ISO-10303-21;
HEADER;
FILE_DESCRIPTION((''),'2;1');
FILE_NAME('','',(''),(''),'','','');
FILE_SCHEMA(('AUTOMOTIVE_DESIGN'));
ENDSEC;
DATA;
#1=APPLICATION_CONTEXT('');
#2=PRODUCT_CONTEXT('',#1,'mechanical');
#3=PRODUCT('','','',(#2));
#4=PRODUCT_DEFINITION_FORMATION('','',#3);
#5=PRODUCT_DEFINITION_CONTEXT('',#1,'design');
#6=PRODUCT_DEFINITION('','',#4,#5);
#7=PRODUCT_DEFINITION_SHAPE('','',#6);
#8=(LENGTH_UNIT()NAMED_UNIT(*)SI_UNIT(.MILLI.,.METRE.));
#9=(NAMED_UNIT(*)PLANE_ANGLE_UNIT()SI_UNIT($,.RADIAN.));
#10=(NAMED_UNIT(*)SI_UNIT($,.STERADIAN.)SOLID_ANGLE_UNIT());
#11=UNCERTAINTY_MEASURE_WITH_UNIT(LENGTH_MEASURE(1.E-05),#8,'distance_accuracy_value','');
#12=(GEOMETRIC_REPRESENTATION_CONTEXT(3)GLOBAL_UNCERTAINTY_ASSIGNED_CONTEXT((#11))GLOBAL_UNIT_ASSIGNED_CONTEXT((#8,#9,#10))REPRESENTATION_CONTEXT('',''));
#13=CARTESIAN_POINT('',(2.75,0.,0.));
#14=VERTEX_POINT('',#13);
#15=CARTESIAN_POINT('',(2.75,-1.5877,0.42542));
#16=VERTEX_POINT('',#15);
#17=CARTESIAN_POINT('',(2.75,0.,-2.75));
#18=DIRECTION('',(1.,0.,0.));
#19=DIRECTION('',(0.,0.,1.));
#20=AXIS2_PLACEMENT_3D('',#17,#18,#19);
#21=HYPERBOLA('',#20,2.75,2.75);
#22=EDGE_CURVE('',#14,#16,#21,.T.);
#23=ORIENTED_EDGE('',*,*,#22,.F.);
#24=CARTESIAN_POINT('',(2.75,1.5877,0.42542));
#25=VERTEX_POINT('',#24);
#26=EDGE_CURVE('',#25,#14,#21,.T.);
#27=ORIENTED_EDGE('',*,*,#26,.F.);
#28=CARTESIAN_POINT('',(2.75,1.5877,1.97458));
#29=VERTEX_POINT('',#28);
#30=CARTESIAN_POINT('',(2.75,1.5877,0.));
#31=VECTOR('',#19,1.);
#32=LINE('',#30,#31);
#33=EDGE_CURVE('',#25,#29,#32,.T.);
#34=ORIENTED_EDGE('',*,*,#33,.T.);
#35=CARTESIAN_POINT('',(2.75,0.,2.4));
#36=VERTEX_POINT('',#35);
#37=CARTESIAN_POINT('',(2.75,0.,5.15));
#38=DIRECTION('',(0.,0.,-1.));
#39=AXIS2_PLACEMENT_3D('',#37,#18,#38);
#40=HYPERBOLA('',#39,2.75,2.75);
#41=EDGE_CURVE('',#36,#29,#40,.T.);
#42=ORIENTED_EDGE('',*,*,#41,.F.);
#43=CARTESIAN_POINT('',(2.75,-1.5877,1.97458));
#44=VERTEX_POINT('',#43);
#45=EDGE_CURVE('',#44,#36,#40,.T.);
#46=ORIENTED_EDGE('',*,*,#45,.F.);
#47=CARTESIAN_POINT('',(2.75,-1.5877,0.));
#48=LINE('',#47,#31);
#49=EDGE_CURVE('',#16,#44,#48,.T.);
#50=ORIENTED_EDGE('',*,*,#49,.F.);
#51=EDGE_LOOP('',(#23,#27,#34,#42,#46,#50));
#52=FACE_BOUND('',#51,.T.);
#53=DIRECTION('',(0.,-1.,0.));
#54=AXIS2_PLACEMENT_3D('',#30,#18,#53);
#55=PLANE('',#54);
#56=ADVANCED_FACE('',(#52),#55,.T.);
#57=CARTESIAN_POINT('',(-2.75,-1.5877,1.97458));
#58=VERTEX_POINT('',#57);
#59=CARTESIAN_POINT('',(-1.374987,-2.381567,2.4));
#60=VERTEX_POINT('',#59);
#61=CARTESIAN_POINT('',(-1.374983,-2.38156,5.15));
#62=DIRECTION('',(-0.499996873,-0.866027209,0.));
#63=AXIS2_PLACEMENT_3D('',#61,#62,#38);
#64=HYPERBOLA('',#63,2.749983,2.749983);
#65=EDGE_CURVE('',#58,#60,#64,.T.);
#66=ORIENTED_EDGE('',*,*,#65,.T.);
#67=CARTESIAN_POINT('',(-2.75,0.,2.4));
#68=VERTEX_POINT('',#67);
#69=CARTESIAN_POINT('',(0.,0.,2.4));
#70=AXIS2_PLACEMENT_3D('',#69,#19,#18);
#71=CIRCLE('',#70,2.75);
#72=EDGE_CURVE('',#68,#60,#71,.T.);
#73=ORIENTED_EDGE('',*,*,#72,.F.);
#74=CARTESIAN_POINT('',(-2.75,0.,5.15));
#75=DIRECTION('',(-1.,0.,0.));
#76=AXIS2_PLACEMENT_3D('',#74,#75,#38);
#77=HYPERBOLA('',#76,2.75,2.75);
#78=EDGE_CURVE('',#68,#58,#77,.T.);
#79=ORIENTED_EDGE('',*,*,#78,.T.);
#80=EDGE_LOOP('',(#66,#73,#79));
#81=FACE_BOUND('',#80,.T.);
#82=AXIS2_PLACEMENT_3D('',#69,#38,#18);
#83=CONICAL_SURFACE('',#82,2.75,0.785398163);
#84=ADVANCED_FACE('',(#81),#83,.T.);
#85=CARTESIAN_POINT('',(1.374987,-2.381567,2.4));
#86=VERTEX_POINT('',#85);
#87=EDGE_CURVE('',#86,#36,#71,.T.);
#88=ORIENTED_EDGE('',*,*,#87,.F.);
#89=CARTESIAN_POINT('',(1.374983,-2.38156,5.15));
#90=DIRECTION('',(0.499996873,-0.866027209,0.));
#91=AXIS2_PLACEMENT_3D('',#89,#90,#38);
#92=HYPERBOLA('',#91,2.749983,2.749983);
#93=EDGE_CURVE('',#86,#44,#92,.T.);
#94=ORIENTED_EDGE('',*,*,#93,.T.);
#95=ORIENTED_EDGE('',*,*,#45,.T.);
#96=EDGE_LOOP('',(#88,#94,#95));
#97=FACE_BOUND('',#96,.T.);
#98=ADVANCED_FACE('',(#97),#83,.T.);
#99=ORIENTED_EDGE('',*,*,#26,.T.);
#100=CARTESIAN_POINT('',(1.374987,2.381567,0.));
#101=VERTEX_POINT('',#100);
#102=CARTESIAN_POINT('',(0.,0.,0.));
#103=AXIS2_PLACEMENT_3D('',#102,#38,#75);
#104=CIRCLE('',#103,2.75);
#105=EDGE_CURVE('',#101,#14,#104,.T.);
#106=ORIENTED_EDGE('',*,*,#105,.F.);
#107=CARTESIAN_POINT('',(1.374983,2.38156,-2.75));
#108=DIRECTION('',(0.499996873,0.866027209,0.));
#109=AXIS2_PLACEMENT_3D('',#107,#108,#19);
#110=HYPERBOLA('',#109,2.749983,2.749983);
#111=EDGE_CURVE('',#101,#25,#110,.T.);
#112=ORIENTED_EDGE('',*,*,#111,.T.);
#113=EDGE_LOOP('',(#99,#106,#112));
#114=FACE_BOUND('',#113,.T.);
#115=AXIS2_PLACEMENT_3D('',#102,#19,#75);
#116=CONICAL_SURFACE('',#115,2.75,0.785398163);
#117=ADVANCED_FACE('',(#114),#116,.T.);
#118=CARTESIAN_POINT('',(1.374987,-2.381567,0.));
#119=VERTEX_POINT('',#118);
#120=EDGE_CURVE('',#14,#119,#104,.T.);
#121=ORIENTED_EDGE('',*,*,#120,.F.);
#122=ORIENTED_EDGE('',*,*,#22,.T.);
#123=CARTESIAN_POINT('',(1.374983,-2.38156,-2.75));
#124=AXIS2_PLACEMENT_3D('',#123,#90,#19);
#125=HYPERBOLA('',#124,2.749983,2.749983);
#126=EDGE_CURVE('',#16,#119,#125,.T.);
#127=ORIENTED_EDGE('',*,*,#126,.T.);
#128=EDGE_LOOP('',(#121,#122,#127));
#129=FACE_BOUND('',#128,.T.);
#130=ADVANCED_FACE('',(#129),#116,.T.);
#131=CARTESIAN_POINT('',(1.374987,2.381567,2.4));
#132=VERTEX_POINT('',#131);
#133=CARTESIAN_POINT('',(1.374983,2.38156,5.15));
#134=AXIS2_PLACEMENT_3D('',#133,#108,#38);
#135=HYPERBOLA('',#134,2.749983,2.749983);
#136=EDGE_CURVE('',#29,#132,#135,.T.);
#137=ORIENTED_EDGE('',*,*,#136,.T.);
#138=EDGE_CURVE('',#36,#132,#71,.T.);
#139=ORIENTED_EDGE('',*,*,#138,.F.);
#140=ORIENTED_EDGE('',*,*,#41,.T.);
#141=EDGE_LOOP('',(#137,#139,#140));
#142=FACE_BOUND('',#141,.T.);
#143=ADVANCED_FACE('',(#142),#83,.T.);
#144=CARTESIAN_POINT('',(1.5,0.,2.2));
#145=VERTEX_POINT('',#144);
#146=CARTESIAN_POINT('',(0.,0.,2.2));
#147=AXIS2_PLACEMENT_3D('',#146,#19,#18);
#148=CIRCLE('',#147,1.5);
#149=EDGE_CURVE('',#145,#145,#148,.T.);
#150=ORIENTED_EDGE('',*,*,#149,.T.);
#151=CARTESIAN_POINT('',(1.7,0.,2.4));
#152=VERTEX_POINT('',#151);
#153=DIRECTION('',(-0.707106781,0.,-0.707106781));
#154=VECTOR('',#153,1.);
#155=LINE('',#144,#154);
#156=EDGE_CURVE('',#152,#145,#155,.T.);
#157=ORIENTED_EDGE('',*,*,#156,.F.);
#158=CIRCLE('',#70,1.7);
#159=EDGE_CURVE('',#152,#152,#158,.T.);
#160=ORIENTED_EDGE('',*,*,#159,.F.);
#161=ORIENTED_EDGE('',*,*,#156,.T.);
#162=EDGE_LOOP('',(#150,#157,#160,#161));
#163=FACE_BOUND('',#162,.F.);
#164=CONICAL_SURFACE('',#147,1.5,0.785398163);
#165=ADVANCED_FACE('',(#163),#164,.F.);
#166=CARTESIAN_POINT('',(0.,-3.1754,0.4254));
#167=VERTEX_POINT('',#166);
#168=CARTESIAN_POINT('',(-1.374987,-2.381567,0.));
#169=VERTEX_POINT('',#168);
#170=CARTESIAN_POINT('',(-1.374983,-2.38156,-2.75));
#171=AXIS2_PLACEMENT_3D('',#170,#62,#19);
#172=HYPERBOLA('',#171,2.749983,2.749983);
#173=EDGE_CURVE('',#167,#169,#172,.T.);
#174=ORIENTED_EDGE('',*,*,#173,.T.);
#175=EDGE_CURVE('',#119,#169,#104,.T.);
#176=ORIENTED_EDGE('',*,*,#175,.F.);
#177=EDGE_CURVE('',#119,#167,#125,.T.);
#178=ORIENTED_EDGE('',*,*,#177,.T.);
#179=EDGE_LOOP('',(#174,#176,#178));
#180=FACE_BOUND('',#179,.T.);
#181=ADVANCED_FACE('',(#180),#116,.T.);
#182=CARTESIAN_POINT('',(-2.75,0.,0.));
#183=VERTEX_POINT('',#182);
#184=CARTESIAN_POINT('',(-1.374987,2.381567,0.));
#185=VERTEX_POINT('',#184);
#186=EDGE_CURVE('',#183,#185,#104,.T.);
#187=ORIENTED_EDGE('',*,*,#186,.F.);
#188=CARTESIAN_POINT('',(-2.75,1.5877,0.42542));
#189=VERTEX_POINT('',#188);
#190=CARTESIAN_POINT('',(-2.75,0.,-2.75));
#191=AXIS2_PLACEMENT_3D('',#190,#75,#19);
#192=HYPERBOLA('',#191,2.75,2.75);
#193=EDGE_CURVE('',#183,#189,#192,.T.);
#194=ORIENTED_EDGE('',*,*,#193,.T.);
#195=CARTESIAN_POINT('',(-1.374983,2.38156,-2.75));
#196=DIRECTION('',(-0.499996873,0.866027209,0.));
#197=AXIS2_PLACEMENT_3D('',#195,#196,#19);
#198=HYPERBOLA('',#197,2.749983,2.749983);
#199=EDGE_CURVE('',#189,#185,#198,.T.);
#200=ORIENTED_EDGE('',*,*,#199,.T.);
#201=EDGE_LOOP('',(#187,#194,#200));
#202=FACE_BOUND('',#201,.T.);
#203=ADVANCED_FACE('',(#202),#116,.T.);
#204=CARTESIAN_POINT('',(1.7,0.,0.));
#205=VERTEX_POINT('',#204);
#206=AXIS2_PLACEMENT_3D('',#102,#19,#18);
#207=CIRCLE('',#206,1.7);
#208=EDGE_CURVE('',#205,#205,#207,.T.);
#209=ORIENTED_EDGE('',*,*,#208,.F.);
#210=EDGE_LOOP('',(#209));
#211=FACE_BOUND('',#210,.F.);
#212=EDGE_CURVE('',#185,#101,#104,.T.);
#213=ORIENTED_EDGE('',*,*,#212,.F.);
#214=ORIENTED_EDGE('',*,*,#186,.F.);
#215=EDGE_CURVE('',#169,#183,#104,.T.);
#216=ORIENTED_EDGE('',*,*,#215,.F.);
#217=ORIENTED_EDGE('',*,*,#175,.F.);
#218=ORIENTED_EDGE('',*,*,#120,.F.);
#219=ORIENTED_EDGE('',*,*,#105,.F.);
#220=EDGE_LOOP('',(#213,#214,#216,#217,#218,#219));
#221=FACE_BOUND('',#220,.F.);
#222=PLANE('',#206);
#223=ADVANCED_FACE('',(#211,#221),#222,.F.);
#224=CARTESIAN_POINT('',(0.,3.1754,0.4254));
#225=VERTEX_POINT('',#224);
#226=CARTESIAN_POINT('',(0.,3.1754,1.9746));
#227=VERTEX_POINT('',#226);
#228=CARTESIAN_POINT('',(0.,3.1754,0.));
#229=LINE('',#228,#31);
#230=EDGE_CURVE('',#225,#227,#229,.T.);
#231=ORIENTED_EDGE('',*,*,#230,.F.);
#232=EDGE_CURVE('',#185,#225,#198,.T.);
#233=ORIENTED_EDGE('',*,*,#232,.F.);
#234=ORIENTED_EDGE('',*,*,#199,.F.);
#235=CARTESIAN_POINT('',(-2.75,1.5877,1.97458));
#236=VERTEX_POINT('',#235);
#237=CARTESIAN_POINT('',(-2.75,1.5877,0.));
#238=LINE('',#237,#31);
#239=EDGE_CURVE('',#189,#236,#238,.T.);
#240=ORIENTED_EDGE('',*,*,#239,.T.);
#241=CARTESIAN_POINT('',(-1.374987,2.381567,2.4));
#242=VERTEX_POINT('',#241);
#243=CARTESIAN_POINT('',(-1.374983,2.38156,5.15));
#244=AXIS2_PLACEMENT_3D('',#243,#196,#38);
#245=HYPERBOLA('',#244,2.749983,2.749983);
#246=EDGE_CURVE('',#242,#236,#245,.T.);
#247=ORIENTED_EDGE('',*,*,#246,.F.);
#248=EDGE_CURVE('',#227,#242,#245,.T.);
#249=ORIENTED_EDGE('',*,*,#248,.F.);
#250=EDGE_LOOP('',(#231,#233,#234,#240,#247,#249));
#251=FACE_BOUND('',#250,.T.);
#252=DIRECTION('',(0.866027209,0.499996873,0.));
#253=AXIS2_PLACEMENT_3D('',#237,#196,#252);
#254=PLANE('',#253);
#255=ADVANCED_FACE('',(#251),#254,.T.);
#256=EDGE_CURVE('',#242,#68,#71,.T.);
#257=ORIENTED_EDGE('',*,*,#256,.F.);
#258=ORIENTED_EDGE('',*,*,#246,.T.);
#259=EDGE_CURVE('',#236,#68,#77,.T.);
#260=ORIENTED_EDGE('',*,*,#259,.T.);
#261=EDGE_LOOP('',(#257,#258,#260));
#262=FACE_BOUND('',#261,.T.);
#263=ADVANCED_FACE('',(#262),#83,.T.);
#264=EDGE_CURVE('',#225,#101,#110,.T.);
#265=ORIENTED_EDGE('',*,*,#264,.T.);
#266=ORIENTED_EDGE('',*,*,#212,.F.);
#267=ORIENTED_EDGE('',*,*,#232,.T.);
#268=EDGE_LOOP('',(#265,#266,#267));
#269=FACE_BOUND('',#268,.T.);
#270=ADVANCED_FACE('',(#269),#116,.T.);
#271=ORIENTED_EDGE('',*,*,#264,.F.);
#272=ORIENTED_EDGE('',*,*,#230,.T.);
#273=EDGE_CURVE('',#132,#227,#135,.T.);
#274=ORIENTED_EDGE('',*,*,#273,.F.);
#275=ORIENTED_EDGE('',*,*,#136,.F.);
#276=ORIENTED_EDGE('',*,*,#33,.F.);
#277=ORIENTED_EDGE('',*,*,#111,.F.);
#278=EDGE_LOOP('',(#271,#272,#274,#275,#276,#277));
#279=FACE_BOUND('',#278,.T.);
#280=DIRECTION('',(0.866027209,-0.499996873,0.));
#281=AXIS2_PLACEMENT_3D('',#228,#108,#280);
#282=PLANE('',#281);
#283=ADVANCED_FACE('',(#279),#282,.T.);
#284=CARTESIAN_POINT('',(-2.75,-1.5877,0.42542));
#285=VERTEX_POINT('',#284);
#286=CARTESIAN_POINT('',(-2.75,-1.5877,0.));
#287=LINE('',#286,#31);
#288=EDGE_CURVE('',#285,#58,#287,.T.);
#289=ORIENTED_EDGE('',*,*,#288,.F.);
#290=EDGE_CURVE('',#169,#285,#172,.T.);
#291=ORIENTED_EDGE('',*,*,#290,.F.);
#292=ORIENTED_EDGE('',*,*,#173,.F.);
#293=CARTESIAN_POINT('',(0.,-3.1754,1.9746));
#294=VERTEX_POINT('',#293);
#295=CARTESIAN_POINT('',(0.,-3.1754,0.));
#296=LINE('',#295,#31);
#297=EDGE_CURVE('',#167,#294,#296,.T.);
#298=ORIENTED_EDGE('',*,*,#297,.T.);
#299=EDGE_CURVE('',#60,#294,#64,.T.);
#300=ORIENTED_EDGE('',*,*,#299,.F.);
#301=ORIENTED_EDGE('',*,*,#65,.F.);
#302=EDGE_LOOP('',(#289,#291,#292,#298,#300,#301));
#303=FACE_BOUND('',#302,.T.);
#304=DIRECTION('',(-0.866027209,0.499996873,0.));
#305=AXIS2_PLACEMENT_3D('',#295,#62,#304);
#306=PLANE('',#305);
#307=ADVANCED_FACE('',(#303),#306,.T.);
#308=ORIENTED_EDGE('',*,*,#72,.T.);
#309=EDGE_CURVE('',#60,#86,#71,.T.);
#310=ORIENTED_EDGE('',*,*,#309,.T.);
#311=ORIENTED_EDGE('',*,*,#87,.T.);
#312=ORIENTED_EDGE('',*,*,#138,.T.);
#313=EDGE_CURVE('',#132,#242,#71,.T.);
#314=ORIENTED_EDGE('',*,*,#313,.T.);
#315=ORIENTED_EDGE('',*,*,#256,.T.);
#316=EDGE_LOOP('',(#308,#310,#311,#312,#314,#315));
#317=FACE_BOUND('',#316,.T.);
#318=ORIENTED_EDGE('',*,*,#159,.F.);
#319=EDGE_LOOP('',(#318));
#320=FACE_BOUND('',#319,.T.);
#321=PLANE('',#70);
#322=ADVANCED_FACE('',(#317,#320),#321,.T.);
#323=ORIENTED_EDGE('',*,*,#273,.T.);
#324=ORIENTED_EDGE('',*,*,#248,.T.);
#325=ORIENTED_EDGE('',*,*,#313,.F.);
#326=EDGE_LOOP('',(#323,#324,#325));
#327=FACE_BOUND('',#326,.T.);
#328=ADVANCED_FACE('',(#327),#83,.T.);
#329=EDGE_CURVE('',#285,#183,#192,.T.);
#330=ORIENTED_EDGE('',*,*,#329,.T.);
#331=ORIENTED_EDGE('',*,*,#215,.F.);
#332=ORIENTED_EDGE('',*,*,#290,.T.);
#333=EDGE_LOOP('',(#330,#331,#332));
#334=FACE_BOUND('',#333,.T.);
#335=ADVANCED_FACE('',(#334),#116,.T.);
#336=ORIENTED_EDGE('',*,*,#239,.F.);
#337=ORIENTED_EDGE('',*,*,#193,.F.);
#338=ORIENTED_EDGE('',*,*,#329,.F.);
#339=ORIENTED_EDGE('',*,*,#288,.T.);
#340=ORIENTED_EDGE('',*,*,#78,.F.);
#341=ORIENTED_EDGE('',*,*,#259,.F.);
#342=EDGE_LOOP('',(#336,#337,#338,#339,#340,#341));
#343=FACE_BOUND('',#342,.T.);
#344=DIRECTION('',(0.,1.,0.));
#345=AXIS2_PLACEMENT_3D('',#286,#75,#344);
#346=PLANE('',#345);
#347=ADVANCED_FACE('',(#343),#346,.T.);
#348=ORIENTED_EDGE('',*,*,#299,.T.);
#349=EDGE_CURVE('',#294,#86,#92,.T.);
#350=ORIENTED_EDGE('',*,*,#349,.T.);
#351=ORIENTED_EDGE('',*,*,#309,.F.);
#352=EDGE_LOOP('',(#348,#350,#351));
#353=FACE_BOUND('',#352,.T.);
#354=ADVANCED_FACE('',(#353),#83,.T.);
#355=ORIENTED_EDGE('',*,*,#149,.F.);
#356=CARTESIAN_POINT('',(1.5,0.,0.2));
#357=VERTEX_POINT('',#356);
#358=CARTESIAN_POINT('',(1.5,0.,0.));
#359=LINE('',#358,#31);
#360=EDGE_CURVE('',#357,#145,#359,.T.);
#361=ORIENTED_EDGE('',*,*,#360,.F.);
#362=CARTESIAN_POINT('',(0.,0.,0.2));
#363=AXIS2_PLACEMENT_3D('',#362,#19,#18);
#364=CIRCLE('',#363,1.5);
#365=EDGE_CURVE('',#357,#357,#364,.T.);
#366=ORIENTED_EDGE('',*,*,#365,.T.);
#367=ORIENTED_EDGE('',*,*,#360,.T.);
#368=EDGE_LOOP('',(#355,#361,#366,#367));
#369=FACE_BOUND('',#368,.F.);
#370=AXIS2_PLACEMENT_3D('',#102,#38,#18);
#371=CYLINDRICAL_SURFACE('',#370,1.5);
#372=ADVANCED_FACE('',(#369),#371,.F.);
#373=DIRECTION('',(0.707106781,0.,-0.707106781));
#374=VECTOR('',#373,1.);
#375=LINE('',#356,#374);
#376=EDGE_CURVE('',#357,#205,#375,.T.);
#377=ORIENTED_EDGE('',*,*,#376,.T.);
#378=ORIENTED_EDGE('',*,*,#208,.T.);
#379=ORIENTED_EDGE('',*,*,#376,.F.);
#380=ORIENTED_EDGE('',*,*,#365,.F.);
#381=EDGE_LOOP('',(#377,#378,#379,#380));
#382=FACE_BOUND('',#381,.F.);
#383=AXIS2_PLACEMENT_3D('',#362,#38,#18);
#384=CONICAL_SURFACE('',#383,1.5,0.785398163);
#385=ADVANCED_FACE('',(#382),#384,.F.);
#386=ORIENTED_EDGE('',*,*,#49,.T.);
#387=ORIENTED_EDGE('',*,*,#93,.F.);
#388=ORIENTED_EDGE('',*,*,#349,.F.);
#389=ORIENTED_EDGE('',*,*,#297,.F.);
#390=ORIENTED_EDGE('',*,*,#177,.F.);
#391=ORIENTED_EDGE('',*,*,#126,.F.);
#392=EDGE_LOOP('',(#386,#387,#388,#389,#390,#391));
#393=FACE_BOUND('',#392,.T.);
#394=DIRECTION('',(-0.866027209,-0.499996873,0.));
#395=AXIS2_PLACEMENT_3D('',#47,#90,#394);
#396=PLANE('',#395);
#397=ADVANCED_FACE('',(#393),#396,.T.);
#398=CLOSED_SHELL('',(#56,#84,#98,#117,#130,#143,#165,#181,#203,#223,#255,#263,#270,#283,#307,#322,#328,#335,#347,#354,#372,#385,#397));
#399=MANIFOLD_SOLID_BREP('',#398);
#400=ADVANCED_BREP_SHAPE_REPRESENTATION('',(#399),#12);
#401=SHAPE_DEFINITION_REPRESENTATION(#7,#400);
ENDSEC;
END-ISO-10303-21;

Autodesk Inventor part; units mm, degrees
ref_plane "YZ Plane" through (0, 0, 0) normal (1, 0, 0) x (0, 1, 0)
ref_plane "XZ Plane" through (0, 0, 0) normal (0, 1, 0) x (-1, 0, 0)
ref_plane "XY Plane" through (0, 0, 0) normal (0, 0, 1) x (1, 0, 0)
sketch "Náčrt1" plane through (0, 0, 0) normal (0, 0, 1) x (1, 0, 0)
  line L0 (2.75, -1.5877) -> (0, -3.1754)
  line L1 (0, -3.1754) -> (-2.75, -1.5877)
  line L2 (-2.75, -1.5877) -> (-2.75, 1.5877)
  line L3 (-2.75, 1.5877) -> (0, 3.1754)
  line L4 (0, 3.1754) -> (2.75, 1.5877)
  line L5 (2.75, 1.5877) -> (2.75, -1.5877)
  circle A0 centre (0, 0) radius 1.5
  point P0 (2.75, 0)
  dimension "d1" = 3
extrude "Vysunutí1" add sketch "Náčrt1" along normal blind 2.4
thread "Závit1" size "M3x0.5" class "6H" standard "ANSI Metric M Profile" full length
sketch "Náčrt2" plane through (0, 0, 2.4) normal (0, 0, 1) x (1, 0, 0)
  circle A0 centre (0, 0) radius 2.75
extrude "Vysunutí2" cut sketch "Náčrt2" against normal through all draft 45 keep common part
sketch "Náčrt3" plane through (0, 0, 0) normal (0, 0, -1) x (-1, 0, 0)
  circle A0 centre (0, 0) radius 2.75
extrude "Vysunutí3" cut sketch "Náčrt3" against normal through all draft 45 keep common part
chamfer "Zkosení1" distance 0.2 angle 45 1 edges at (-1.5, 0, 2.4)
chamfer "Zkosení2" distance 0.2 angle 45 1 edges at (-1.5, 0, 0)
properties part number "Nut-M3" material "Ocel, vysokopevnostní, nízkolegovaná"
